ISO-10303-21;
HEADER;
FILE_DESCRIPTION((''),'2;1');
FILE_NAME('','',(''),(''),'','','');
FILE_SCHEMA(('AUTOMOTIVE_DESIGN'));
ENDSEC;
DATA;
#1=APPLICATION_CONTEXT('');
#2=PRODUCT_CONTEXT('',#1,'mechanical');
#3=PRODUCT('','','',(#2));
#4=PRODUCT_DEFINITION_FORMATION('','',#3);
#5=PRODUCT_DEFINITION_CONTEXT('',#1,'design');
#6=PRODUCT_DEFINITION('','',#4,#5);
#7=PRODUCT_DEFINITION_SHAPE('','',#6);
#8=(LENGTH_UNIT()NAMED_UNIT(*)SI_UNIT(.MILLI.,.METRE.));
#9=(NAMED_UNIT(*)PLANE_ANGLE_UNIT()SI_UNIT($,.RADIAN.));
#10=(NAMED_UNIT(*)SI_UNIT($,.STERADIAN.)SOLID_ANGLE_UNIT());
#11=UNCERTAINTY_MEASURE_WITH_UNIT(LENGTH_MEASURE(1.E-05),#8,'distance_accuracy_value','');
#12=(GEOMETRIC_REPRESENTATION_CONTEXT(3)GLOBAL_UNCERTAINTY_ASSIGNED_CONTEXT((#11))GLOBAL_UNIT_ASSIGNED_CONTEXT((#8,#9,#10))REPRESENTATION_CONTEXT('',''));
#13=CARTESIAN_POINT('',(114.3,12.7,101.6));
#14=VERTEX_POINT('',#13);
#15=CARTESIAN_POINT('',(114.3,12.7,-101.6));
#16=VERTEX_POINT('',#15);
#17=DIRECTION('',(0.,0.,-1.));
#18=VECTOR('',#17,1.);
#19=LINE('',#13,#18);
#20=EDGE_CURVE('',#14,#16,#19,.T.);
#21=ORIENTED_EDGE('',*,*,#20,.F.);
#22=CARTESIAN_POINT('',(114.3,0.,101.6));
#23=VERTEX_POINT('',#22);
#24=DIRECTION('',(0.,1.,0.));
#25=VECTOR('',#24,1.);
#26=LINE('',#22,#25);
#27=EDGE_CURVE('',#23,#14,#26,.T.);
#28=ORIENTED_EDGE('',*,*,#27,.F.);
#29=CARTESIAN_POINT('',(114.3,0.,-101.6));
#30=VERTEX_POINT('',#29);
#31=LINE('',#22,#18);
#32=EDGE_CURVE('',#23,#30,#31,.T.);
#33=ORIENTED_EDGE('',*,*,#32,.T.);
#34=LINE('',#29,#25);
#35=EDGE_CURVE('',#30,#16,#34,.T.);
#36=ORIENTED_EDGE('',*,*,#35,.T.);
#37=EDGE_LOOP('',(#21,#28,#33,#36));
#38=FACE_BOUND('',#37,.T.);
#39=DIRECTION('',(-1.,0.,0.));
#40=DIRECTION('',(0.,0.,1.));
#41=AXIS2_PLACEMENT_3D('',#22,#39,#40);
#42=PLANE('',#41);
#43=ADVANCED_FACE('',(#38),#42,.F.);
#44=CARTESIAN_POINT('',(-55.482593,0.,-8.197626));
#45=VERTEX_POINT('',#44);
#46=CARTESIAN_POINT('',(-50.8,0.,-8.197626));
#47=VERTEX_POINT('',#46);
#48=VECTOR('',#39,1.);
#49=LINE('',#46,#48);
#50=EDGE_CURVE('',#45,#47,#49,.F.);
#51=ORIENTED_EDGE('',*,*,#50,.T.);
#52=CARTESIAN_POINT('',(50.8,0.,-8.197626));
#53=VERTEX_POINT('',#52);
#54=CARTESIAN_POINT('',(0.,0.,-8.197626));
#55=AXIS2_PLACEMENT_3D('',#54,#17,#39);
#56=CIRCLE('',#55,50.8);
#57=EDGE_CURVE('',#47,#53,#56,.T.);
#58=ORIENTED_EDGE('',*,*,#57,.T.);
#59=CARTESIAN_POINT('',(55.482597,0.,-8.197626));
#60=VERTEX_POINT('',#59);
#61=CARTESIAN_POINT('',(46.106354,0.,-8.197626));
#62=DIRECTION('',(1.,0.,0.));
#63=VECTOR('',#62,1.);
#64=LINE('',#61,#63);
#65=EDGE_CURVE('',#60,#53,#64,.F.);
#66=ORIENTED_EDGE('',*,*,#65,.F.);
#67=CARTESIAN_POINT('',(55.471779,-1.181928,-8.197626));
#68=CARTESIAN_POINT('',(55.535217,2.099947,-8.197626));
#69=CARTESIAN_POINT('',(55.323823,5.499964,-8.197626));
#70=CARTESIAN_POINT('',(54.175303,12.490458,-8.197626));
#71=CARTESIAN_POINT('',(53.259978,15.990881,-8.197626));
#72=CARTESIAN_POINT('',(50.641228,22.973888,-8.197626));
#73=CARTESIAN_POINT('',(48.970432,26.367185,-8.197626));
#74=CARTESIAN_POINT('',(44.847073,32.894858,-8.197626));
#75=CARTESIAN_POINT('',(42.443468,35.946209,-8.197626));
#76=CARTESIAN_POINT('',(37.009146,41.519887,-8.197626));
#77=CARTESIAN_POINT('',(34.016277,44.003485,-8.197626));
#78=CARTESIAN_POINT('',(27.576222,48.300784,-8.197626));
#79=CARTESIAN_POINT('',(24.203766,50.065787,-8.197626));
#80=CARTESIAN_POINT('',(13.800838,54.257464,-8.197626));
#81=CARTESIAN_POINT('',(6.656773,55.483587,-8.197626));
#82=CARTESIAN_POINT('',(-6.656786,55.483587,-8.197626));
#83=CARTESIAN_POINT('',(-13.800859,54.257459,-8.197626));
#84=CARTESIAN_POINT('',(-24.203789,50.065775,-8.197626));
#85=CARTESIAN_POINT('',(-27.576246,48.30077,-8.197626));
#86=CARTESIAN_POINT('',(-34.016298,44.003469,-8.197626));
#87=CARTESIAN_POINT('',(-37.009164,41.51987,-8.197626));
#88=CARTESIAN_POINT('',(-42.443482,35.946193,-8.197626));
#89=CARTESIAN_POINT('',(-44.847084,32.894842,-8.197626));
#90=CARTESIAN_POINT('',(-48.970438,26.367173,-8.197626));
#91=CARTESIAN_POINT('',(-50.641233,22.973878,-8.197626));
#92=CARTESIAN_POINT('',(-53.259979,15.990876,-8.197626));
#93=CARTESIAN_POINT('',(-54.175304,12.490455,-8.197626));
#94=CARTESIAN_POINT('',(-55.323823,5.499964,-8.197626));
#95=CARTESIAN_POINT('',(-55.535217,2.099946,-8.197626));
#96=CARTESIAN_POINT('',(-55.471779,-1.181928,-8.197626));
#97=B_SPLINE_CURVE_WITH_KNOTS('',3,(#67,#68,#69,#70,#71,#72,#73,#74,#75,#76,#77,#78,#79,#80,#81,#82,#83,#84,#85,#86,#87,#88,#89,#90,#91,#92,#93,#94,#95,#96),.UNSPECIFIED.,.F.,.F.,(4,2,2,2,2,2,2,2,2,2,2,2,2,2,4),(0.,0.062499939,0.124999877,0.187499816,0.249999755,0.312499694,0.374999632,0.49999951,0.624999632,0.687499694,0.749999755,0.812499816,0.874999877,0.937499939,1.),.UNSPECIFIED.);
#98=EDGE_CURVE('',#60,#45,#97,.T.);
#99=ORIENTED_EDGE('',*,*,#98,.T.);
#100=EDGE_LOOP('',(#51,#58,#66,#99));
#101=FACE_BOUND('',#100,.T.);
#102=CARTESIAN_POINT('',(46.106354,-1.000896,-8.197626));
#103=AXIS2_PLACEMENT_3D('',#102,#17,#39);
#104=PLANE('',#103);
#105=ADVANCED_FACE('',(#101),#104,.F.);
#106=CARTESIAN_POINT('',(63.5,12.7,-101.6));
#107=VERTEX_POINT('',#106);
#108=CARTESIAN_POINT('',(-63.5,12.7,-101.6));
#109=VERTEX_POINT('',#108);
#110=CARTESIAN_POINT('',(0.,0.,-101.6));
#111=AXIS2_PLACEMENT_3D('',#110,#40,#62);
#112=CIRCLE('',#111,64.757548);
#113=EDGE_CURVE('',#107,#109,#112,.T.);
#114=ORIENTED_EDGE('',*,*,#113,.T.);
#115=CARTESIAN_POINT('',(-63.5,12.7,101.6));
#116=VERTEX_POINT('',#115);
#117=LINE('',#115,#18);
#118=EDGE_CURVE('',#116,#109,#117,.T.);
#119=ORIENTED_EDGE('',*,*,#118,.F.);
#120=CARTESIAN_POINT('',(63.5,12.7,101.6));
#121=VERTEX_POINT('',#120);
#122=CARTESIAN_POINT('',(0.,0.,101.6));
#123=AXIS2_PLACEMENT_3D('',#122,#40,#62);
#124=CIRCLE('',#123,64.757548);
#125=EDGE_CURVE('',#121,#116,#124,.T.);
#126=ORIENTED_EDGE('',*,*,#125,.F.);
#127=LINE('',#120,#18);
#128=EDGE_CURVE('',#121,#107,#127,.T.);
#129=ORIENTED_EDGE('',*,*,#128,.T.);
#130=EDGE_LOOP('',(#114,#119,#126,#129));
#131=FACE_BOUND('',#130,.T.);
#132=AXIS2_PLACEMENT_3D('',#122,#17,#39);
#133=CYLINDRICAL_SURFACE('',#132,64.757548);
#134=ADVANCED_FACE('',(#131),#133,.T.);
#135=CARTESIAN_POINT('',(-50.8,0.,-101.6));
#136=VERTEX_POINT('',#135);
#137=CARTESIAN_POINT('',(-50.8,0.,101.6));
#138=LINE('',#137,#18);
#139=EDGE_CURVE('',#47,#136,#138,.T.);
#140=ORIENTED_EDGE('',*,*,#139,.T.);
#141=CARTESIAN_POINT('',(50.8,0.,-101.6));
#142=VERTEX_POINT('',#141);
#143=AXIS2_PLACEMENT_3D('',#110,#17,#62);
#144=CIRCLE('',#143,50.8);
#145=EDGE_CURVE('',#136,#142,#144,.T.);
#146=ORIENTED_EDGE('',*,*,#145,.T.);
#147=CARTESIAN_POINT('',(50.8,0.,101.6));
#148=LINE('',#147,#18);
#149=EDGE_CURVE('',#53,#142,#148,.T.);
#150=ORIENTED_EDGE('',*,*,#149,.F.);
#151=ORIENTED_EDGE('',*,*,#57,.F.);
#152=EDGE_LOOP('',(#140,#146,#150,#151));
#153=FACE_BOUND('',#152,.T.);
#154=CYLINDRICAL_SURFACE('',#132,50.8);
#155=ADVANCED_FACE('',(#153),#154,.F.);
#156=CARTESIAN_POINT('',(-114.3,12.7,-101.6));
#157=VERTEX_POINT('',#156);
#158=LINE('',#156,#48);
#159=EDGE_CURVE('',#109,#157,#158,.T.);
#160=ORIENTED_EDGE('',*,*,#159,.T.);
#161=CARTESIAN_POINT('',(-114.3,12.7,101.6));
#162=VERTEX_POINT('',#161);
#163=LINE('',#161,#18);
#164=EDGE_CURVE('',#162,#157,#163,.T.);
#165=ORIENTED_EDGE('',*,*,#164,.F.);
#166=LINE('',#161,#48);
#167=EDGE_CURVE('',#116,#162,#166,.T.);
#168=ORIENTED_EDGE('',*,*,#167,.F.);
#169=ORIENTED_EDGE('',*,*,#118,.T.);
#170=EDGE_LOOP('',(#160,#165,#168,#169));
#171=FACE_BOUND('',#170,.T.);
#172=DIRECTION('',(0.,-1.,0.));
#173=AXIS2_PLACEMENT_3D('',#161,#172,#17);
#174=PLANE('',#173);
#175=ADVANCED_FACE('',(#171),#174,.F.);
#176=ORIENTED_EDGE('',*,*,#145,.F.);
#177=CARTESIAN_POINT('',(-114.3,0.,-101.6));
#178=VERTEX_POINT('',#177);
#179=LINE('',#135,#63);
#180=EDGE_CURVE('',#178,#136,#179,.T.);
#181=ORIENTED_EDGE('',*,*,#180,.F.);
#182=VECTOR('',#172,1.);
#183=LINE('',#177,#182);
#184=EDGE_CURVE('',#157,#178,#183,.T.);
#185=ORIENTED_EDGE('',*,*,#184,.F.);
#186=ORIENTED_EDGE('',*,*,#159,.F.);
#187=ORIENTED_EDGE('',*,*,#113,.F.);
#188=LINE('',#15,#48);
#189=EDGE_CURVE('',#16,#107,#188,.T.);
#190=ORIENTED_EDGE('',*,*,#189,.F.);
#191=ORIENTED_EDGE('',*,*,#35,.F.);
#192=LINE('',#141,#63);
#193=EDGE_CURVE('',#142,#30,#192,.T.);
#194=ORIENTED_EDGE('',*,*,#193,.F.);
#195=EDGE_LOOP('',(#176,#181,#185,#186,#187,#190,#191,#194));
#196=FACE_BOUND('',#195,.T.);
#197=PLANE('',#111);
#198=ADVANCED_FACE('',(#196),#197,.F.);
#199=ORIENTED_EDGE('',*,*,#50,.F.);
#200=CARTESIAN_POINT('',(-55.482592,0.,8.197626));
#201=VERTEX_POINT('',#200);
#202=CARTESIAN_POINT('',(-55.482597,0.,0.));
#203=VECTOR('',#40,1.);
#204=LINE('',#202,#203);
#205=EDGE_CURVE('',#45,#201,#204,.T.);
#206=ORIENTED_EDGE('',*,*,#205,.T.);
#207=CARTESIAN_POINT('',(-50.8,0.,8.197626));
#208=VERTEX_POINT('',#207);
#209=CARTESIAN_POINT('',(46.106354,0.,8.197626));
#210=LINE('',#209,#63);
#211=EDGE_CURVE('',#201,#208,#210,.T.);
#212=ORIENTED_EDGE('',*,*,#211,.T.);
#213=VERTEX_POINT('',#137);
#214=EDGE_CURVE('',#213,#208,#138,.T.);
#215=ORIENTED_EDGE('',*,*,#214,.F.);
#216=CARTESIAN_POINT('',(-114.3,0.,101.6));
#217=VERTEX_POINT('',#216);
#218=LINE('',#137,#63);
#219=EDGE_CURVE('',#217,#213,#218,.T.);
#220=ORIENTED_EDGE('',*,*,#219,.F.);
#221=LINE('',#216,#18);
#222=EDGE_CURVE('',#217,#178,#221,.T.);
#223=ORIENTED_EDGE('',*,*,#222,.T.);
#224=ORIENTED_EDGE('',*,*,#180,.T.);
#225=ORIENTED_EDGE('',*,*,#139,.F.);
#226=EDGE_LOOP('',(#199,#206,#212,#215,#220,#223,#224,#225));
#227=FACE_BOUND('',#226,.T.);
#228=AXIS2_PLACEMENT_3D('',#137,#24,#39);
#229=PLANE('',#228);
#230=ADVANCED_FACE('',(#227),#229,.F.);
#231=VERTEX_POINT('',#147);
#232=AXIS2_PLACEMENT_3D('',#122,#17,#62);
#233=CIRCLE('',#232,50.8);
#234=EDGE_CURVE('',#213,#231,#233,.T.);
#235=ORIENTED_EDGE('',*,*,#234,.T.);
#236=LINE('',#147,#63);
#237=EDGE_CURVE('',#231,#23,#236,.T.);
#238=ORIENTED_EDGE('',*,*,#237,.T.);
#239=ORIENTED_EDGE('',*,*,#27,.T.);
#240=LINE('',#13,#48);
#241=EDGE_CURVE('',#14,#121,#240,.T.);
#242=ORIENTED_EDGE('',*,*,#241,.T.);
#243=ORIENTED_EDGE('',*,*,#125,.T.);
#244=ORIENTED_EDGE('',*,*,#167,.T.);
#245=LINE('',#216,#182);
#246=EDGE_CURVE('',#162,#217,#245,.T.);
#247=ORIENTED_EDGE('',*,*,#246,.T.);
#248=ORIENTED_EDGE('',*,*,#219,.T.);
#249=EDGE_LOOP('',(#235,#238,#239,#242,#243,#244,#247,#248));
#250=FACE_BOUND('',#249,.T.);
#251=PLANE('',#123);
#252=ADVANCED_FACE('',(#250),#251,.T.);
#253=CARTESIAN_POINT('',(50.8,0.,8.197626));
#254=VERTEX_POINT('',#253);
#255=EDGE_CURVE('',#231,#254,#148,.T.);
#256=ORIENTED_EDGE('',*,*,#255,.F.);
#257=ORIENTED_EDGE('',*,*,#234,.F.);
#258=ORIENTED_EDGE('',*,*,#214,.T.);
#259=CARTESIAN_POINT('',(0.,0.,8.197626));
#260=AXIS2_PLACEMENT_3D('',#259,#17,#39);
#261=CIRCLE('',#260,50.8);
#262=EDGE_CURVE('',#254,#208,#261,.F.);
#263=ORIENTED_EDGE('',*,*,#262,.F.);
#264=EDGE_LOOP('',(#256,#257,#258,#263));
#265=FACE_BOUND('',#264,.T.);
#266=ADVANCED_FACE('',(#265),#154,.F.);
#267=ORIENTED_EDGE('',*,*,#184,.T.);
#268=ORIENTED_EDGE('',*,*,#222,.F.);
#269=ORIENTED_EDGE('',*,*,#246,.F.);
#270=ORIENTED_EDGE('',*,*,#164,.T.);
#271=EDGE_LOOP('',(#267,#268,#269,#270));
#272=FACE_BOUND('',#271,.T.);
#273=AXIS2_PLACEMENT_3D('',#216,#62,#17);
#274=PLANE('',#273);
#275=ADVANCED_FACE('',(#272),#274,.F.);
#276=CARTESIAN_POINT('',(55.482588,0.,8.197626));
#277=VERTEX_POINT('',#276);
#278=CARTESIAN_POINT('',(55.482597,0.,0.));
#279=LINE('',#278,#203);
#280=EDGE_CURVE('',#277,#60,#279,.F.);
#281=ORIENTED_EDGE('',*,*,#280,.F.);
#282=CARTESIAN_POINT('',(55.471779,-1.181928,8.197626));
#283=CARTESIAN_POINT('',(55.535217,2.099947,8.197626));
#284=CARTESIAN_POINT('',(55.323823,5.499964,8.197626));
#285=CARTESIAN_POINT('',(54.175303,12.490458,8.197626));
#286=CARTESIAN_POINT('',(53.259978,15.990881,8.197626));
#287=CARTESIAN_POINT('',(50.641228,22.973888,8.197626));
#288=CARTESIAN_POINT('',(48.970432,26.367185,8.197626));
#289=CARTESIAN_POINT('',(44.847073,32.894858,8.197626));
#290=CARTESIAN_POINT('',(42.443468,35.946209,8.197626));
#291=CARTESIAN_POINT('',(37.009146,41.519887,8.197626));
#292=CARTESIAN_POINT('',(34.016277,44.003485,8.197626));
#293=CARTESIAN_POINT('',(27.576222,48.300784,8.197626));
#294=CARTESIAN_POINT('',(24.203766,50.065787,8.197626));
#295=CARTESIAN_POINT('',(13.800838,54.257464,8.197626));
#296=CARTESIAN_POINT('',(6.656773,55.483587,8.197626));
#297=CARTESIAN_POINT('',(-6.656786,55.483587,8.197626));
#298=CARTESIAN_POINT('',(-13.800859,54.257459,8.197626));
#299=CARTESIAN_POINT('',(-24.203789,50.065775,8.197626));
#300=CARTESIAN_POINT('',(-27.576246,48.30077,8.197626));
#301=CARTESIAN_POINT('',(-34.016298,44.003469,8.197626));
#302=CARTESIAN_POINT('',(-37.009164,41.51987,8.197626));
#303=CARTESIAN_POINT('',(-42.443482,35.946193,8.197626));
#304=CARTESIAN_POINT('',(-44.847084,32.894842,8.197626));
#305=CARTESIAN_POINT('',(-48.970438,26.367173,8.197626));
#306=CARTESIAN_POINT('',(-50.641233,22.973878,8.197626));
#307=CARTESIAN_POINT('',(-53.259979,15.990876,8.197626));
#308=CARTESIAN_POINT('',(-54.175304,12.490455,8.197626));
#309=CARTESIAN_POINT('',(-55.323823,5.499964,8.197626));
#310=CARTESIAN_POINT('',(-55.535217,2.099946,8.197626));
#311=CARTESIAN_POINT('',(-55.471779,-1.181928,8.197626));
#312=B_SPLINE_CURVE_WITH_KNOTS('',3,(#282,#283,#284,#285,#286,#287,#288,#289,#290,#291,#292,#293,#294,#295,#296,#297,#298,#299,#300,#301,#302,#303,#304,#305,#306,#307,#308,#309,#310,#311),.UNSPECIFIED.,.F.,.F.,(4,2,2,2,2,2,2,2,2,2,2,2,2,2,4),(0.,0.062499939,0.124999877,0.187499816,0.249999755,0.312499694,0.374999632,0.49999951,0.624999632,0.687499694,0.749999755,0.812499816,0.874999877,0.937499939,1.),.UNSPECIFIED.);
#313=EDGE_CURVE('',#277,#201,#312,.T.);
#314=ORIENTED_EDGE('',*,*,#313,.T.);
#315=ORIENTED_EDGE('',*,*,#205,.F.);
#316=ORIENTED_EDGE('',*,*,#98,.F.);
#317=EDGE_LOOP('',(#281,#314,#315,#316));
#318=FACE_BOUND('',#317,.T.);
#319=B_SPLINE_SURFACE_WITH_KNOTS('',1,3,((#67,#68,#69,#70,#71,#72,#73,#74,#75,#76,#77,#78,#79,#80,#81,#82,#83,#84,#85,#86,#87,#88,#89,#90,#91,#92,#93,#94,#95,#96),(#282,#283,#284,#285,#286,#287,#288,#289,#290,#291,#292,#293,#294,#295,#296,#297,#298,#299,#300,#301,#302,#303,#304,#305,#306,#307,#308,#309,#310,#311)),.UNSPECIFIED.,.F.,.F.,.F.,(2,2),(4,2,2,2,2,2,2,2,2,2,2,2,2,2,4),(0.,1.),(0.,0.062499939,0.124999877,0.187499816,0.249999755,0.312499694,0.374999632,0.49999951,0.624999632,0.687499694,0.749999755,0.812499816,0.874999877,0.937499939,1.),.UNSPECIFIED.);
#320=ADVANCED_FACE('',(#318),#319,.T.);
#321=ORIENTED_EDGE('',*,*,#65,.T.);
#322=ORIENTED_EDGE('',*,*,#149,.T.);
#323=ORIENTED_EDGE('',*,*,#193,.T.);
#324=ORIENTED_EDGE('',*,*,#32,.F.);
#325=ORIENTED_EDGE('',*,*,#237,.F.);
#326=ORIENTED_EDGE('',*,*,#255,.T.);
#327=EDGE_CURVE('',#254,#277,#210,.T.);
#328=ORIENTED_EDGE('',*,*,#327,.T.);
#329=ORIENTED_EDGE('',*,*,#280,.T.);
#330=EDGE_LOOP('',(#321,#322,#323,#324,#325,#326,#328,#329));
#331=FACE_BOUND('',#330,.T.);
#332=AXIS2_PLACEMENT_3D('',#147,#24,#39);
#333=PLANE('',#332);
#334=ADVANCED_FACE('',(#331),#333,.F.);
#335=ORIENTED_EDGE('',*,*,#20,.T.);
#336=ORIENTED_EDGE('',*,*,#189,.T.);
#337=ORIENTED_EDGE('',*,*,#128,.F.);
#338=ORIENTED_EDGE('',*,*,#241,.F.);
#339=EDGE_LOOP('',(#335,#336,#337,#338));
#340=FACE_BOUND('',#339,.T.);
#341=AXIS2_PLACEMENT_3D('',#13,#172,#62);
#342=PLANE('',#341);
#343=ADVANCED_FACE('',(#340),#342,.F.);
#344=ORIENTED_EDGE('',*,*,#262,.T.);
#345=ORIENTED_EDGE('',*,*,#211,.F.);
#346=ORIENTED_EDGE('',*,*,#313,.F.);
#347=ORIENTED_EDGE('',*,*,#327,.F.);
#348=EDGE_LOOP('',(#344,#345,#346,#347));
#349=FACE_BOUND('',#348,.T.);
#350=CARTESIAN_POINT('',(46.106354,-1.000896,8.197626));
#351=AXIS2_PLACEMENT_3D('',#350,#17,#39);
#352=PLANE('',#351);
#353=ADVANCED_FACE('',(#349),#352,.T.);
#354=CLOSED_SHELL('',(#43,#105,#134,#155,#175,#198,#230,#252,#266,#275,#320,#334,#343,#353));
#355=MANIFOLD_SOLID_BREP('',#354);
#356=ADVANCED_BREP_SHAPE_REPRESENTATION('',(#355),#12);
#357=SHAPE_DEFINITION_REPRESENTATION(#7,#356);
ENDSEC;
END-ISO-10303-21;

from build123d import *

# Parameters (mm, degrees)
BOSS_EXTRUDE2_DEPTH = 101.6
CUT_SWEEP2_START    = -8.197626231
CUT_SWEEP2_DEPTH    = 16.395252462


# Read off the part's stored shape, not the designer's step: Cut-Sweep2
with BuildPart() as part:
    # Sketch1 → Boss-Extrude2 (new, symmetric)
    with BuildSketch(Plane.XY):
        with BuildLine():
            Line((-50.8, 0), (-114.3, 0))
            Line((-114.3, 0), (-114.3, 12.7))
            Line((-114.3, 12.7), (-63.5, 12.7))
            ThreePointArc((-63.5, 12.7), (0, 64.757547823), (63.5, 12.7))
            Line((63.5, 12.7), (114.3, 12.7))
            Line((114.3, 12.7), (114.3, 0))
            Line((114.3, 0), (50.8, 0))
            ThreePointArc((50.8, 0), (0, 50.8), (-50.8, 0))
        make_face()
    extrude(amount=BOSS_EXTRUDE2_DEPTH, both=True)

    # Cut-Sweep2 outline → Cut-Sweep2 (cut)
    with BuildSketch(Plane.XY.offset(CUT_SWEEP2_START)):
        with BuildLine():
            Line((50.8, 0), (55.482597318, 0))
            add(Edge.make_bspline(
                [(55.482597318, 0), (55.479494195, 2.91415368), (55.255178285, 5.917770975), (54.175303072, 12.490458413), (53.25997788, 15.990881145), (50.641228247, 22.973888147), (48.970431753, 26.367184551), (44.847073202, 32.894857639), (42.443468127, 35.946208717), (37.009145884, 41.519887141), (34.016276899, 44.003484644), (27.57622226, 48.300783556), (24.203765584, 50.065786815), (13.800838479, 54.25746412), (6.656772523, 55.483587394), (-6.656785579, 55.483587394), (-13.800859436, 54.257459266), (-24.203789489, 50.065775387), (-27.576245764, 48.3007701), (-34.016297572, 44.003468622), (-37.009164361, 41.519870489), (-42.443481596, 35.946192603), (-44.847084096, 32.894842463), (-48.970437832, 26.367172857), (-50.64123252, 22.973878319), (-53.259979362, 15.990875624), (-54.175303836, 12.490454657), (-55.255178301, 5.917770093), (-55.47949419, 2.914153473), (-55.482597317, 0)],
                knots=[0.007470969, 0.007470969, 0.007470969, 0.007470969, 0.062499939, 0.062499939, 0.124999877, 0.124999877, 0.187499816, 0.187499816, 0.249999755, 0.249999755, 0.312499694, 0.312499694, 0.374999632, 0.374999632, 0.49999951, 0.49999951, 0.624999632, 0.624999632, 0.687499694, 0.687499694, 0.749999755, 0.749999755, 0.812499816, 0.812499816, 0.874999877, 0.874999877, 0.937499939, 0.937499939, 0.992529016, 0.992529016, 0.992529016, 0.992529016], degree=3))
            Line((-55.482597317, 0), (-50.8, 0))
            ThreePointArc((-50.8, 0), (0, 50.8), (50.8, 0))
        make_face()
    extrude(amount=CUT_SWEEP2_DEPTH, mode=Mode.SUBTRACT)


solid = part.part
